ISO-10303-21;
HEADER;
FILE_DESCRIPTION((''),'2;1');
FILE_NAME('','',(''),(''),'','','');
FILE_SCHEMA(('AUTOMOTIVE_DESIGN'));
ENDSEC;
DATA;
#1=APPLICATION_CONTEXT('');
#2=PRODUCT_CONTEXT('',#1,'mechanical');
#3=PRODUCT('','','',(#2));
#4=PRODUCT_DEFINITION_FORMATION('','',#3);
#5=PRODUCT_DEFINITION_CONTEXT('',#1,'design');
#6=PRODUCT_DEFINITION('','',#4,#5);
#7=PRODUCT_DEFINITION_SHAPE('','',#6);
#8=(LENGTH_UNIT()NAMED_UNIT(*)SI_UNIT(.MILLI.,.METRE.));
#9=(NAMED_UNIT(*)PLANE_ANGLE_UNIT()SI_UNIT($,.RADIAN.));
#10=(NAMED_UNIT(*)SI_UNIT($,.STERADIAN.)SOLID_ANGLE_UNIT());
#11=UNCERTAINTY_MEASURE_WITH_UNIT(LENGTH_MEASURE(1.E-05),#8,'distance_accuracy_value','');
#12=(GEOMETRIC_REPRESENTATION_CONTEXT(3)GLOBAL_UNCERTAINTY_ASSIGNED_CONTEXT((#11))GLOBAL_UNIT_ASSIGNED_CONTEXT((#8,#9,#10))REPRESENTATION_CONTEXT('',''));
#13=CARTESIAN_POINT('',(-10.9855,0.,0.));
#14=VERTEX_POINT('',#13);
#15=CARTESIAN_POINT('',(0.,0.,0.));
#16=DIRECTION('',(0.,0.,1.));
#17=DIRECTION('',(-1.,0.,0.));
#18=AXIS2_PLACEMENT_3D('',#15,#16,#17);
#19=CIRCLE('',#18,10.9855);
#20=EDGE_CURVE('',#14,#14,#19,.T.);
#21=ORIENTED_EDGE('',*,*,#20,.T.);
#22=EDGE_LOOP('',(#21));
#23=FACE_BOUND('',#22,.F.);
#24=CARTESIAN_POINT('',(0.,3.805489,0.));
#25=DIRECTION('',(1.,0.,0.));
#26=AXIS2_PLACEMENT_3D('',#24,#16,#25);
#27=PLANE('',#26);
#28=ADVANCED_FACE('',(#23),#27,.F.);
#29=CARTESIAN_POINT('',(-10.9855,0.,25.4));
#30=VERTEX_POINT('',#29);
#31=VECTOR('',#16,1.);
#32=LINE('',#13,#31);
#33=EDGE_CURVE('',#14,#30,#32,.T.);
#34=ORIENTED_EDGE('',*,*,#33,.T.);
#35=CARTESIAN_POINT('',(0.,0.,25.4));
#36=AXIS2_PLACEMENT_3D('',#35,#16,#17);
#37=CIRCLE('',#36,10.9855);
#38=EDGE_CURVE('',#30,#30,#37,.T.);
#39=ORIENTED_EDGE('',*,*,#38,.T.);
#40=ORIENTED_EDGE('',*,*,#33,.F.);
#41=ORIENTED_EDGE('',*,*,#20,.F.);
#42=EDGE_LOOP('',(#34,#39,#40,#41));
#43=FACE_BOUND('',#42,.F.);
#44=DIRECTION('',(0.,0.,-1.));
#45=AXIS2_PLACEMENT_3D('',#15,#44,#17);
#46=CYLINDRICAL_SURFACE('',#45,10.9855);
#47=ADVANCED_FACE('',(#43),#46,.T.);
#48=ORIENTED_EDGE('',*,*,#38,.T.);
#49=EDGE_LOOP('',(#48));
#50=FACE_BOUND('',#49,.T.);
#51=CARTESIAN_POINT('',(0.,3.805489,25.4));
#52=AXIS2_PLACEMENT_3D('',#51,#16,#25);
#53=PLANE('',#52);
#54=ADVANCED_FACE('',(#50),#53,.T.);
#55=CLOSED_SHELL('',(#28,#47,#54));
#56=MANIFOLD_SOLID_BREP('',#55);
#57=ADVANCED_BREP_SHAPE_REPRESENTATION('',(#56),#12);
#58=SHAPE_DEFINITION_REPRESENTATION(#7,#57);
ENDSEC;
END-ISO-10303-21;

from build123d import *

# Parameters (mm, degrees)
F1_DEPTH = 25.4


# Not quite as in the source:
# - a feature names something its author has since deleted; it is built from what else it names


with BuildPart() as f1:
    # F0 (on Top) → F1 (new body)
    with BuildSketch(Plane.XY):
        with BuildLine():
            Line((0, 0), (10.9855, 0))
            ThreePointArc((10.9855, 0), (0, 10.9855), (-10.9855, 0))
            Line((-10.9855, 0), (0, 0))
        make_face()
        with BuildLine():
            ThreePointArc((-10.9855, 0), (0, -10.9855), (10.9855, 0))
            Line((10.9855, 0), (0, 0))
            Line((0, 0), (-10.9855, 0))
        make_face()
    extrude(amount=F1_DEPTH)


solid = f1.part
